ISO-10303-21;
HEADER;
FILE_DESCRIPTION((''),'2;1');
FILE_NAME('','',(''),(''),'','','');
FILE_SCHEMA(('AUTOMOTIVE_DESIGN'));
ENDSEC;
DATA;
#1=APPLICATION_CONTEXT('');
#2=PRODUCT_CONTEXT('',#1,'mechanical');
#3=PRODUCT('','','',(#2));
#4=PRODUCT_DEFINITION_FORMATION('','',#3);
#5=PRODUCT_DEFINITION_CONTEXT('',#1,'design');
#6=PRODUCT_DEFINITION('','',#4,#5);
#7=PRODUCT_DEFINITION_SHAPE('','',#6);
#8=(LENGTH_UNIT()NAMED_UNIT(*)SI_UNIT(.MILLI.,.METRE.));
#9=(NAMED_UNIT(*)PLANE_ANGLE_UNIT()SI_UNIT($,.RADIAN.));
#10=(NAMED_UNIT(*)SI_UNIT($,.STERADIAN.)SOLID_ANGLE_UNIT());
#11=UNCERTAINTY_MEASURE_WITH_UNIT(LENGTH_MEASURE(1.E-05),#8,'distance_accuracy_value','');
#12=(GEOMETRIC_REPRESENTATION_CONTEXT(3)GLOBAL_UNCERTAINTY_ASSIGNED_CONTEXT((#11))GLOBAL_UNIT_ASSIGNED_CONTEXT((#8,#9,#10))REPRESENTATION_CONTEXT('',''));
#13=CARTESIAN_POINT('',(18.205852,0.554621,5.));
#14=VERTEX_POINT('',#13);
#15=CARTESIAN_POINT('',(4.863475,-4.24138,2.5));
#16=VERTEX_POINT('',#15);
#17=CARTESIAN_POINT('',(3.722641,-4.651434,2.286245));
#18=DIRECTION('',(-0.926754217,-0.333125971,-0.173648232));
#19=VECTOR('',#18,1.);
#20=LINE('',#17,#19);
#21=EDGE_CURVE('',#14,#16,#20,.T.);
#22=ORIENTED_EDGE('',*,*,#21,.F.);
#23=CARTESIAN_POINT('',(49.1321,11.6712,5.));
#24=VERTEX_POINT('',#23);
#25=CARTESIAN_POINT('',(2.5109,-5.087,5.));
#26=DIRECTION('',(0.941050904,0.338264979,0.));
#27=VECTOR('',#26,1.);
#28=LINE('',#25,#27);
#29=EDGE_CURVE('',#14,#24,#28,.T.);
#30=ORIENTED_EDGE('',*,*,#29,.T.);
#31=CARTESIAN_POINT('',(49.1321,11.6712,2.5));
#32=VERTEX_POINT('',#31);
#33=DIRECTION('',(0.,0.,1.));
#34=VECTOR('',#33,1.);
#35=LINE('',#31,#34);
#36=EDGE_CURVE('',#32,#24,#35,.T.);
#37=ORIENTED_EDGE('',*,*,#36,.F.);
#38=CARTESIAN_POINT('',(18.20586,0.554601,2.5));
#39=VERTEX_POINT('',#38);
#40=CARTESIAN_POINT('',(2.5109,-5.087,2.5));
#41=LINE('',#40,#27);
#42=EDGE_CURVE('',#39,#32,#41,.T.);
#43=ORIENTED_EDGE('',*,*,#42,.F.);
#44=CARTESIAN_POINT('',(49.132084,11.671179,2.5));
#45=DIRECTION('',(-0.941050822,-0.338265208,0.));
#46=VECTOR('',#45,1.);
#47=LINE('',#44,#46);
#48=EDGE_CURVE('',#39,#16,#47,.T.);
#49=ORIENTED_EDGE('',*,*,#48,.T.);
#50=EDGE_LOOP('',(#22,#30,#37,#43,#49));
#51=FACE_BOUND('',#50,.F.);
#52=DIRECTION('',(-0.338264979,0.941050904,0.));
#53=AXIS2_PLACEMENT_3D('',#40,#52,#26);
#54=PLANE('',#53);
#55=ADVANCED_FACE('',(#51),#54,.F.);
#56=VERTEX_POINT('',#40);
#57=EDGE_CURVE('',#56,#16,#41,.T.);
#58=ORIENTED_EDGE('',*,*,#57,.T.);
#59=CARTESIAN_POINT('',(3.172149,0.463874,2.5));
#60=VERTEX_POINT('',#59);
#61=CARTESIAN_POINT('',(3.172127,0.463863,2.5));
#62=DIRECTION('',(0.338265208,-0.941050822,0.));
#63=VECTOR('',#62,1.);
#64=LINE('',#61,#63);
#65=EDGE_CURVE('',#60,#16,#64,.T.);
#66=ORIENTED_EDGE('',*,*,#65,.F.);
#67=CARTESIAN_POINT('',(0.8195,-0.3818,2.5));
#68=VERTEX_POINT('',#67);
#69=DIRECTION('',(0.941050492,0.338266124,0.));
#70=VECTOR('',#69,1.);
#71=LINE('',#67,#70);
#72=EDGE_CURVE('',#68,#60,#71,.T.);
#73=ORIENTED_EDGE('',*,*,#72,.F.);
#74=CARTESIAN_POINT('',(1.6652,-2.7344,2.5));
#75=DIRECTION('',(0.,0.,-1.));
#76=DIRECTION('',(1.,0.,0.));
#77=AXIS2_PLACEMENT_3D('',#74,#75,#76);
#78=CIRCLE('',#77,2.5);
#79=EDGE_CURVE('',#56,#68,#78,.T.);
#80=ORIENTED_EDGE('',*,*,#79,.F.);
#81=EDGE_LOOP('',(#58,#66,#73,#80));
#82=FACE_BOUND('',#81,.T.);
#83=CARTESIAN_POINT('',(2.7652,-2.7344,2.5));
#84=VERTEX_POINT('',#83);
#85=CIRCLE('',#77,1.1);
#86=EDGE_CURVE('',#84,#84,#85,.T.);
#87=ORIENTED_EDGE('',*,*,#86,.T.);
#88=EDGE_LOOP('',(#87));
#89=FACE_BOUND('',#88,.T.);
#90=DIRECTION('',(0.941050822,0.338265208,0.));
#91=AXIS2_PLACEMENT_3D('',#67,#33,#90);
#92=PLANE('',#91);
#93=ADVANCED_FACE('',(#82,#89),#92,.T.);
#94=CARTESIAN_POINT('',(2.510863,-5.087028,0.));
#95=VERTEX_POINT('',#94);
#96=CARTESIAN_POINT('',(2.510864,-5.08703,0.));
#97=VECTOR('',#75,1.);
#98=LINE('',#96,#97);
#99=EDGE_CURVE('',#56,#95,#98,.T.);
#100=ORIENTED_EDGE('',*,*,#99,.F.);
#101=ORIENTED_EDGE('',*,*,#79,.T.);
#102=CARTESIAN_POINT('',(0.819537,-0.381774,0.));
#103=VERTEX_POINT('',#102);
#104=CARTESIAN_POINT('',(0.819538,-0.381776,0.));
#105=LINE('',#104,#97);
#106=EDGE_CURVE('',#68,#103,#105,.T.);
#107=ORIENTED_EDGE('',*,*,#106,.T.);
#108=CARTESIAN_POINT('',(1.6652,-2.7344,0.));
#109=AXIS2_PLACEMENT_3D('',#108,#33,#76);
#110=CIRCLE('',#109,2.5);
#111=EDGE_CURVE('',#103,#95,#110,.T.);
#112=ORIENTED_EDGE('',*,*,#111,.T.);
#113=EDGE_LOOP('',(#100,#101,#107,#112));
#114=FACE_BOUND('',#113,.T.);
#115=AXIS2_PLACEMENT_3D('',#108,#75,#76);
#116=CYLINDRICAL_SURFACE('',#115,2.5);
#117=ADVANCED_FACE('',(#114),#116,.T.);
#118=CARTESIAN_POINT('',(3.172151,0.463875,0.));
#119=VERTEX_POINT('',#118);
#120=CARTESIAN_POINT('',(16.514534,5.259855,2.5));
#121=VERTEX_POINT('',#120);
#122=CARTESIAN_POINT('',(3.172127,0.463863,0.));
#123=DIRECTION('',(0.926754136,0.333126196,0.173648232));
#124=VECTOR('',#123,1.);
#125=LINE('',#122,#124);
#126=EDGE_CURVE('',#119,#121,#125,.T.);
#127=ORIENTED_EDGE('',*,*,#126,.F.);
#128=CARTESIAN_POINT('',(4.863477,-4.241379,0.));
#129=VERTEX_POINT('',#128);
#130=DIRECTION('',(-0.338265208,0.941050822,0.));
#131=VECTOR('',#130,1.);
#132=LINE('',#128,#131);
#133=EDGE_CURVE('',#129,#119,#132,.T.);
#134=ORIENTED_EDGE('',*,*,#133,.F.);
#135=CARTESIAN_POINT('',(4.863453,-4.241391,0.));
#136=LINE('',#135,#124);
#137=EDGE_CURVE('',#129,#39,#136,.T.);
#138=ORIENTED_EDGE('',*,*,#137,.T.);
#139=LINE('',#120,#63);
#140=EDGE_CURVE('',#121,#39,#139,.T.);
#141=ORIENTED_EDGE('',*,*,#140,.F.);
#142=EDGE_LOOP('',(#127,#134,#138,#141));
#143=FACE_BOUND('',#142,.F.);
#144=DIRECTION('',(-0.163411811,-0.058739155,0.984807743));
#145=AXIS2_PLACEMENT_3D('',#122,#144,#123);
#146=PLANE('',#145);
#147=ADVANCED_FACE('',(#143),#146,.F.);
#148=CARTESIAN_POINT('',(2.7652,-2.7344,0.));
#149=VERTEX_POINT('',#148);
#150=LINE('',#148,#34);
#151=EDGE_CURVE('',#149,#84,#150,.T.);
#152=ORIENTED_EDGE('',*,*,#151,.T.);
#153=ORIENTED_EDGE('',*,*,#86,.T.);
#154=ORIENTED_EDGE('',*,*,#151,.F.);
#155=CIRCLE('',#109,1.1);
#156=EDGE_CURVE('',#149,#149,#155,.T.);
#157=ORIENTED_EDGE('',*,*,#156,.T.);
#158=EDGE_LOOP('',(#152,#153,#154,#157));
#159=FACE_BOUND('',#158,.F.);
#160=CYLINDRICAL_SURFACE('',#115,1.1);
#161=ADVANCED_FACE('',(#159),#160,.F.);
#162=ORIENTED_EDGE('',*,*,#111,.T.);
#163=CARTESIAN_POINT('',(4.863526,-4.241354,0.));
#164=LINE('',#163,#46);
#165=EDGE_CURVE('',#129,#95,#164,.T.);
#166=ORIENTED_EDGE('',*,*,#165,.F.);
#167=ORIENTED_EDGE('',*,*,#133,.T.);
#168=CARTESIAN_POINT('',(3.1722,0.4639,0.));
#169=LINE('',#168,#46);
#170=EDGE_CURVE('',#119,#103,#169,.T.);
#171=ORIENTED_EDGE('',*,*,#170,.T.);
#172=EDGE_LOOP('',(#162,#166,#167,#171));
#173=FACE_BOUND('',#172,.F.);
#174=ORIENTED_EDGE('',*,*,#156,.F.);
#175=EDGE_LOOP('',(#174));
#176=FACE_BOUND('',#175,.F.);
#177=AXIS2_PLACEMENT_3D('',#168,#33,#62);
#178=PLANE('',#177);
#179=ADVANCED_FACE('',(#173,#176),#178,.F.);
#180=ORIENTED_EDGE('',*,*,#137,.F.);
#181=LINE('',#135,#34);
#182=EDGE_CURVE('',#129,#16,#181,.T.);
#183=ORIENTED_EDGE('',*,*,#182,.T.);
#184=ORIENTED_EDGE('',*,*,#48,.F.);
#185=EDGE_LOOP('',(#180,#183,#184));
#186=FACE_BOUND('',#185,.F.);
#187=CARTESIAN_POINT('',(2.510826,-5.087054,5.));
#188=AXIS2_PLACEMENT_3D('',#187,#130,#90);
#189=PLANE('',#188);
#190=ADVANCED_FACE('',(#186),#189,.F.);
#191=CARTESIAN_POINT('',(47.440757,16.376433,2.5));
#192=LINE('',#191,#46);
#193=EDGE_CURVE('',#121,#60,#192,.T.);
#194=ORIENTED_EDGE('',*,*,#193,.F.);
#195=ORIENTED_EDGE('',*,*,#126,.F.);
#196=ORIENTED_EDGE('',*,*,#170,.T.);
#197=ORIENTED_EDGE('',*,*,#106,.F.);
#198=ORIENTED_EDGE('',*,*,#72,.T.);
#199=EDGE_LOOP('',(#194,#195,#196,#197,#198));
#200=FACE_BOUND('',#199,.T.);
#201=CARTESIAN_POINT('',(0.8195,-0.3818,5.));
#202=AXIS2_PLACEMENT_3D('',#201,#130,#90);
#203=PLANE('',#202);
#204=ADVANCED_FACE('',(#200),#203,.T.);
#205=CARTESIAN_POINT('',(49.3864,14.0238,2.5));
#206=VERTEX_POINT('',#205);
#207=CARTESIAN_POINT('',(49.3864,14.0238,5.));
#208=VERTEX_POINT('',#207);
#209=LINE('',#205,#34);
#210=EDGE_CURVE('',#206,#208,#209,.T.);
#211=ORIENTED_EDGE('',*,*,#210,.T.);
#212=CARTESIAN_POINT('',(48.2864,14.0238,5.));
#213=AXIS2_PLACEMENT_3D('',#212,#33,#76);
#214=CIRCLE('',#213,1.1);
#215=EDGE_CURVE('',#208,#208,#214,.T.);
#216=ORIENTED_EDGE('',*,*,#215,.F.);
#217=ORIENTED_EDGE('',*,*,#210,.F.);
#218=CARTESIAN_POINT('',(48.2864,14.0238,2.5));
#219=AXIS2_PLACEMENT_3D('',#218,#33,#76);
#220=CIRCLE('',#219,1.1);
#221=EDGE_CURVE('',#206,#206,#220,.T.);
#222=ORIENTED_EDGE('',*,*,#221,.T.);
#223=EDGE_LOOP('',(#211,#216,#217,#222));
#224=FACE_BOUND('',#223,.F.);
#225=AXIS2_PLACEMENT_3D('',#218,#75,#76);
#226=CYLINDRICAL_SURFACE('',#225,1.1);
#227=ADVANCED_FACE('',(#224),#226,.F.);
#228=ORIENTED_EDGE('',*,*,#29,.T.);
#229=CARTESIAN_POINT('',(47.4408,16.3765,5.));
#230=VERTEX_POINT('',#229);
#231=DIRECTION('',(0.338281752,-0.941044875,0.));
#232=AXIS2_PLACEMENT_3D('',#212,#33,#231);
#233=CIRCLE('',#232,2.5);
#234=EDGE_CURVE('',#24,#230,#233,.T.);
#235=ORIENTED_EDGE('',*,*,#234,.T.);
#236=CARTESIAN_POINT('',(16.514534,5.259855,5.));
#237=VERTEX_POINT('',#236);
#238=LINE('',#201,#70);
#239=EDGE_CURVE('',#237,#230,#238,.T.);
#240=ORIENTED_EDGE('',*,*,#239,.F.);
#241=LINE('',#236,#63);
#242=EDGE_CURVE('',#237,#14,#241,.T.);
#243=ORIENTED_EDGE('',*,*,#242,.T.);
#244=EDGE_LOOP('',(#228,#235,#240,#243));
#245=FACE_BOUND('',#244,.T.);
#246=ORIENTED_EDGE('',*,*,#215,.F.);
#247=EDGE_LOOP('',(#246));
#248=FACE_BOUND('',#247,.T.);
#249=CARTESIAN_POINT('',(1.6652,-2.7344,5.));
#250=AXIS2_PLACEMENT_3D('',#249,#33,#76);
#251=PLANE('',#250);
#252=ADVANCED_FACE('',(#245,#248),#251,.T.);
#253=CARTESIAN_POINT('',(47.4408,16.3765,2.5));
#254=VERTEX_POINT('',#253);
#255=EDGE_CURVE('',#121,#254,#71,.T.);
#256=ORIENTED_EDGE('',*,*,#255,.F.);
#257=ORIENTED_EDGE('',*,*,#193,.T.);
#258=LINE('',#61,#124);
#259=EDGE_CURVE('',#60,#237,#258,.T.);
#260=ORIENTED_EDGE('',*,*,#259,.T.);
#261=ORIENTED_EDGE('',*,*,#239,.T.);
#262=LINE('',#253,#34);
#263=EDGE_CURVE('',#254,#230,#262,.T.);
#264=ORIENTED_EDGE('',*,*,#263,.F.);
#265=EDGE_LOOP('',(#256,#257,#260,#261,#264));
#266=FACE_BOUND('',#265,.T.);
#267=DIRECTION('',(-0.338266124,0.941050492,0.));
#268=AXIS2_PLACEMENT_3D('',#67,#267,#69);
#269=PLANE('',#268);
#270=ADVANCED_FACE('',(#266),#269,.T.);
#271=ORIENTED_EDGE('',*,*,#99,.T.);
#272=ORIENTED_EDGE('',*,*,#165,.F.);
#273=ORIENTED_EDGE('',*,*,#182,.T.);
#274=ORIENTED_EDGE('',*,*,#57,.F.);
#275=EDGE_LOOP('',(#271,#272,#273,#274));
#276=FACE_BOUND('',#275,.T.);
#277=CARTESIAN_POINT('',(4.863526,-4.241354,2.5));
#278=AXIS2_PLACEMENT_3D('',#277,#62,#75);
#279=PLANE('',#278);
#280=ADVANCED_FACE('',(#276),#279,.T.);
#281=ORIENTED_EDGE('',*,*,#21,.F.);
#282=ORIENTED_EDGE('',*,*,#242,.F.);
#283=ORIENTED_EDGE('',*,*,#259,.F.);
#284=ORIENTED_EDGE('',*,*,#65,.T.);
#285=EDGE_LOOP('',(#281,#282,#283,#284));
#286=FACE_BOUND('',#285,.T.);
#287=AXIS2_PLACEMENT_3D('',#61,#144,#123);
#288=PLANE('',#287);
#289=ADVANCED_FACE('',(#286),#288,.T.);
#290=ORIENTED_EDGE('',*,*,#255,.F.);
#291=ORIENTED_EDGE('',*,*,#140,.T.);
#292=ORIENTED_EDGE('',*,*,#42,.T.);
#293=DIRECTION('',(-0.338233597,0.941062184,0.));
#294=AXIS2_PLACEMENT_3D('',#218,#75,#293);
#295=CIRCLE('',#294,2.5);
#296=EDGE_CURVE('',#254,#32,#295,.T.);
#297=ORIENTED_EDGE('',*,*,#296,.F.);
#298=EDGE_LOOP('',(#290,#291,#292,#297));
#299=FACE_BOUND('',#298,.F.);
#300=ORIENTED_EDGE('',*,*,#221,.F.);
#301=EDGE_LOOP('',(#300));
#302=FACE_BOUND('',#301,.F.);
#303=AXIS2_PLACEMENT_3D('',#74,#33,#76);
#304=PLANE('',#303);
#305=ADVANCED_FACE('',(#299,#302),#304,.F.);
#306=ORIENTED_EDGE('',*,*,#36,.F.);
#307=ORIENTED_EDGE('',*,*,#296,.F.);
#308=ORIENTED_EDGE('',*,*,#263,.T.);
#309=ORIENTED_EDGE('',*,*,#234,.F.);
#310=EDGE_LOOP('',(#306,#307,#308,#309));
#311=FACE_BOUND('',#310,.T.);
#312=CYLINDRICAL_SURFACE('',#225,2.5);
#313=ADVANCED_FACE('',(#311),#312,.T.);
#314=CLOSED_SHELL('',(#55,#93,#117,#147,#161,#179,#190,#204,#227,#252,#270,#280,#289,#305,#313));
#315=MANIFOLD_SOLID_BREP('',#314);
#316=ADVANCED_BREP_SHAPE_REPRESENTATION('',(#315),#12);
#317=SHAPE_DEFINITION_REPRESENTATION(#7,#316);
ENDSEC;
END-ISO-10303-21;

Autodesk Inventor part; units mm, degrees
ref_plane "YZ Plane" through (0, 0, 0) normal (1, 0, 0) x (0, 1, 0)
ref_plane "XZ Plane" through (0, 0, 0) normal (0, 1, 0) x (-1, 0, 0)
ref_plane "XY Plane" through (0, 0, 0) normal (0, 0, 1) x (1, 0, 0)
sketch "Sketch1" plane through (0, 0, 0) normal (0, 0, 1) x (1, 0, 0)
  circle A0 centre (1.6652, -2.7344) radius 1.1 projected
  circle A1 centre (1.6652, -2.7344) radius 2.5
  circle A2 centre (48.2864, 14.0238) radius 1.1 construction
  point P0 (0, 0)
  dimension "d0" = 5
extrude "Extrusion1" add sketch "Sketch1" along normal blind 2.5
sketch "Sketch2" plane through (1.6652, -2.7344, 2.5) normal (0, 0, 1) x (1, 0, 0)
  circle A0 centre (0, 0) radius 2.5 projected
  circle A1 centre (0, 0) radius 1.1 projected
  circle A2 centre (46.6212, 16.7582) radius 1.1 projected
  circle A3 centre (46.6212, 16.7582) radius 2.5
  circle A4 centre (0, 0) radius 2.5 projected
  line L0 (0.8457, -2.3526) -> (47.4669, 14.4056)
  line L1 (-0.8457, 2.3526) -> (45.7756, 19.1109)
  point P0 (-1.6652, 2.7344)
  point P1 (0.8457, -2.3526)
  dimension "d4" = 5
extrude "Extrusion2" add sketch "Sketch2" along normal blind 2.5
sketch "Sketch3" plane through (0.8195, -0.3818, 5) normal (-0.3382652, 0.9410508, 0) x (0.9410508, 0.3382652, 0)
  line L0 (49.5417, 2.5) -> (0, 2.5) projected
  line L1 (0, 2.5) -> (0, 0) projected
  line L2 (49.5417, 0) -> (0, 0) projected
  line L3 (49.5417, 2.5) -> (49.5417, 0) projected
  line L4 (0, 2.5) -> (0, 2.5) projected
  line L5 (0, 2.5) -> (0, 0) projected
  line L6 (0, 0) -> (0, 0) projected
  line L7 (0, 2.5) -> (0, 0) projected
  line L8 (-2.5, 5) -> (2.5, 5) projected
  line L9 (-2.5, 0) -> (0, 0) projected
  line L10 (-2.5, 5) -> (-2.5, 0) projected
  line L11 (-2.5, 5) -> (2.5, 5) projected
  line L12 (2.5, 5) -> (16.6782, 2.5)
  line L13 (0, 2.5) -> (49.5417, 2.5) projected
  line L14 (2.5, 5) -> (2.5, 2.5) projected
  line L15 (0, 0) -> (49.5417, 0) projected
  line L16 (0, 2.5) -> (2.5, 2.5) projected
  line L17 (16.6782, 0) -> (2.5, 2.5)
  point P0 (-0.6421, 5)
  point P1 (16.6782, 2.5)
  dimension "d7" = 10
extrude "Extrusion3" add sketch "Sketch3" against normal blind 5 contours L0 L14 L12
sketch "Sketch4" plane through (3.1722, 0.4639, 0) normal (-0.9410508, -0.3382652, 0) x (0, 0, 1)
  line L0 (0, -2.5) -> (2.5, -2.5) projected
  line L1 (2.5, 0) -> (2.5, -2.5) projected
  line L2 (0, 0) -> (2.5, 0) projected
  line L3 (0, 0) -> (0, -2.5) projected
  line L4 (0, -2.5) -> (0, -5) projected
  line L5 (2.5, -5) -> (0, -5) projected
  line L6 (2.5, -2.5) -> (2.5, -5) projected
  point P0 (0, 0.6365)
extrude "Extrusion4" add sketch "Sketch4" along normal up to surface
sketch "Sketch5" plane through (0.8195, -0.3818, 5) normal (-0.3382652, 0.9410508, 0) x (0.9410508, 0.3382652, 0)
  line L0 (0, 5) -> (0, 0) projected
  line L1 (0, 0) -> (0, 0) projected
  line L2 (0, 5) -> (0, 0) projected
  line L3 (0, 5) -> (0, 5) projected
  line L4 (49.5417, 2.5) -> (16.6782, 2.5) projected
  line L5 (16.6782, 2.5) -> (2.5, 5) projected
  line L6 (2.5, 5) -> (0, 5) projected
  line L7 (0, 5) -> (0, 0) projected
  line L8 (49.5417, 0) -> (0, 0) projected
  line L9 (49.5417, 2.5) -> (49.5417, 0) projected
  line L10 (-1.1, 0) -> (-1.1, 5) projected
  line L11 (-2.5, 5) -> (-2.5, 0) projected
  line L12 (-2.5, 0) -> (0, 0) projected
  line L13 (-2.5, 5) -> (0, 5) projected
  line L14 (-2.5, 2.5) -> (2.5, 2.5)
  line L15 (2.5, 2.5) -> (16.6782, 0)
  point P0 (-0.6421, 5)
extrude "Extrusion5" cut sketch "Sketch5" against normal up to next contours L14 L15 L8 L0 | L0 L12 L10 L14 | L10 L12 L11 L14
properties part number "Dedo_3"
